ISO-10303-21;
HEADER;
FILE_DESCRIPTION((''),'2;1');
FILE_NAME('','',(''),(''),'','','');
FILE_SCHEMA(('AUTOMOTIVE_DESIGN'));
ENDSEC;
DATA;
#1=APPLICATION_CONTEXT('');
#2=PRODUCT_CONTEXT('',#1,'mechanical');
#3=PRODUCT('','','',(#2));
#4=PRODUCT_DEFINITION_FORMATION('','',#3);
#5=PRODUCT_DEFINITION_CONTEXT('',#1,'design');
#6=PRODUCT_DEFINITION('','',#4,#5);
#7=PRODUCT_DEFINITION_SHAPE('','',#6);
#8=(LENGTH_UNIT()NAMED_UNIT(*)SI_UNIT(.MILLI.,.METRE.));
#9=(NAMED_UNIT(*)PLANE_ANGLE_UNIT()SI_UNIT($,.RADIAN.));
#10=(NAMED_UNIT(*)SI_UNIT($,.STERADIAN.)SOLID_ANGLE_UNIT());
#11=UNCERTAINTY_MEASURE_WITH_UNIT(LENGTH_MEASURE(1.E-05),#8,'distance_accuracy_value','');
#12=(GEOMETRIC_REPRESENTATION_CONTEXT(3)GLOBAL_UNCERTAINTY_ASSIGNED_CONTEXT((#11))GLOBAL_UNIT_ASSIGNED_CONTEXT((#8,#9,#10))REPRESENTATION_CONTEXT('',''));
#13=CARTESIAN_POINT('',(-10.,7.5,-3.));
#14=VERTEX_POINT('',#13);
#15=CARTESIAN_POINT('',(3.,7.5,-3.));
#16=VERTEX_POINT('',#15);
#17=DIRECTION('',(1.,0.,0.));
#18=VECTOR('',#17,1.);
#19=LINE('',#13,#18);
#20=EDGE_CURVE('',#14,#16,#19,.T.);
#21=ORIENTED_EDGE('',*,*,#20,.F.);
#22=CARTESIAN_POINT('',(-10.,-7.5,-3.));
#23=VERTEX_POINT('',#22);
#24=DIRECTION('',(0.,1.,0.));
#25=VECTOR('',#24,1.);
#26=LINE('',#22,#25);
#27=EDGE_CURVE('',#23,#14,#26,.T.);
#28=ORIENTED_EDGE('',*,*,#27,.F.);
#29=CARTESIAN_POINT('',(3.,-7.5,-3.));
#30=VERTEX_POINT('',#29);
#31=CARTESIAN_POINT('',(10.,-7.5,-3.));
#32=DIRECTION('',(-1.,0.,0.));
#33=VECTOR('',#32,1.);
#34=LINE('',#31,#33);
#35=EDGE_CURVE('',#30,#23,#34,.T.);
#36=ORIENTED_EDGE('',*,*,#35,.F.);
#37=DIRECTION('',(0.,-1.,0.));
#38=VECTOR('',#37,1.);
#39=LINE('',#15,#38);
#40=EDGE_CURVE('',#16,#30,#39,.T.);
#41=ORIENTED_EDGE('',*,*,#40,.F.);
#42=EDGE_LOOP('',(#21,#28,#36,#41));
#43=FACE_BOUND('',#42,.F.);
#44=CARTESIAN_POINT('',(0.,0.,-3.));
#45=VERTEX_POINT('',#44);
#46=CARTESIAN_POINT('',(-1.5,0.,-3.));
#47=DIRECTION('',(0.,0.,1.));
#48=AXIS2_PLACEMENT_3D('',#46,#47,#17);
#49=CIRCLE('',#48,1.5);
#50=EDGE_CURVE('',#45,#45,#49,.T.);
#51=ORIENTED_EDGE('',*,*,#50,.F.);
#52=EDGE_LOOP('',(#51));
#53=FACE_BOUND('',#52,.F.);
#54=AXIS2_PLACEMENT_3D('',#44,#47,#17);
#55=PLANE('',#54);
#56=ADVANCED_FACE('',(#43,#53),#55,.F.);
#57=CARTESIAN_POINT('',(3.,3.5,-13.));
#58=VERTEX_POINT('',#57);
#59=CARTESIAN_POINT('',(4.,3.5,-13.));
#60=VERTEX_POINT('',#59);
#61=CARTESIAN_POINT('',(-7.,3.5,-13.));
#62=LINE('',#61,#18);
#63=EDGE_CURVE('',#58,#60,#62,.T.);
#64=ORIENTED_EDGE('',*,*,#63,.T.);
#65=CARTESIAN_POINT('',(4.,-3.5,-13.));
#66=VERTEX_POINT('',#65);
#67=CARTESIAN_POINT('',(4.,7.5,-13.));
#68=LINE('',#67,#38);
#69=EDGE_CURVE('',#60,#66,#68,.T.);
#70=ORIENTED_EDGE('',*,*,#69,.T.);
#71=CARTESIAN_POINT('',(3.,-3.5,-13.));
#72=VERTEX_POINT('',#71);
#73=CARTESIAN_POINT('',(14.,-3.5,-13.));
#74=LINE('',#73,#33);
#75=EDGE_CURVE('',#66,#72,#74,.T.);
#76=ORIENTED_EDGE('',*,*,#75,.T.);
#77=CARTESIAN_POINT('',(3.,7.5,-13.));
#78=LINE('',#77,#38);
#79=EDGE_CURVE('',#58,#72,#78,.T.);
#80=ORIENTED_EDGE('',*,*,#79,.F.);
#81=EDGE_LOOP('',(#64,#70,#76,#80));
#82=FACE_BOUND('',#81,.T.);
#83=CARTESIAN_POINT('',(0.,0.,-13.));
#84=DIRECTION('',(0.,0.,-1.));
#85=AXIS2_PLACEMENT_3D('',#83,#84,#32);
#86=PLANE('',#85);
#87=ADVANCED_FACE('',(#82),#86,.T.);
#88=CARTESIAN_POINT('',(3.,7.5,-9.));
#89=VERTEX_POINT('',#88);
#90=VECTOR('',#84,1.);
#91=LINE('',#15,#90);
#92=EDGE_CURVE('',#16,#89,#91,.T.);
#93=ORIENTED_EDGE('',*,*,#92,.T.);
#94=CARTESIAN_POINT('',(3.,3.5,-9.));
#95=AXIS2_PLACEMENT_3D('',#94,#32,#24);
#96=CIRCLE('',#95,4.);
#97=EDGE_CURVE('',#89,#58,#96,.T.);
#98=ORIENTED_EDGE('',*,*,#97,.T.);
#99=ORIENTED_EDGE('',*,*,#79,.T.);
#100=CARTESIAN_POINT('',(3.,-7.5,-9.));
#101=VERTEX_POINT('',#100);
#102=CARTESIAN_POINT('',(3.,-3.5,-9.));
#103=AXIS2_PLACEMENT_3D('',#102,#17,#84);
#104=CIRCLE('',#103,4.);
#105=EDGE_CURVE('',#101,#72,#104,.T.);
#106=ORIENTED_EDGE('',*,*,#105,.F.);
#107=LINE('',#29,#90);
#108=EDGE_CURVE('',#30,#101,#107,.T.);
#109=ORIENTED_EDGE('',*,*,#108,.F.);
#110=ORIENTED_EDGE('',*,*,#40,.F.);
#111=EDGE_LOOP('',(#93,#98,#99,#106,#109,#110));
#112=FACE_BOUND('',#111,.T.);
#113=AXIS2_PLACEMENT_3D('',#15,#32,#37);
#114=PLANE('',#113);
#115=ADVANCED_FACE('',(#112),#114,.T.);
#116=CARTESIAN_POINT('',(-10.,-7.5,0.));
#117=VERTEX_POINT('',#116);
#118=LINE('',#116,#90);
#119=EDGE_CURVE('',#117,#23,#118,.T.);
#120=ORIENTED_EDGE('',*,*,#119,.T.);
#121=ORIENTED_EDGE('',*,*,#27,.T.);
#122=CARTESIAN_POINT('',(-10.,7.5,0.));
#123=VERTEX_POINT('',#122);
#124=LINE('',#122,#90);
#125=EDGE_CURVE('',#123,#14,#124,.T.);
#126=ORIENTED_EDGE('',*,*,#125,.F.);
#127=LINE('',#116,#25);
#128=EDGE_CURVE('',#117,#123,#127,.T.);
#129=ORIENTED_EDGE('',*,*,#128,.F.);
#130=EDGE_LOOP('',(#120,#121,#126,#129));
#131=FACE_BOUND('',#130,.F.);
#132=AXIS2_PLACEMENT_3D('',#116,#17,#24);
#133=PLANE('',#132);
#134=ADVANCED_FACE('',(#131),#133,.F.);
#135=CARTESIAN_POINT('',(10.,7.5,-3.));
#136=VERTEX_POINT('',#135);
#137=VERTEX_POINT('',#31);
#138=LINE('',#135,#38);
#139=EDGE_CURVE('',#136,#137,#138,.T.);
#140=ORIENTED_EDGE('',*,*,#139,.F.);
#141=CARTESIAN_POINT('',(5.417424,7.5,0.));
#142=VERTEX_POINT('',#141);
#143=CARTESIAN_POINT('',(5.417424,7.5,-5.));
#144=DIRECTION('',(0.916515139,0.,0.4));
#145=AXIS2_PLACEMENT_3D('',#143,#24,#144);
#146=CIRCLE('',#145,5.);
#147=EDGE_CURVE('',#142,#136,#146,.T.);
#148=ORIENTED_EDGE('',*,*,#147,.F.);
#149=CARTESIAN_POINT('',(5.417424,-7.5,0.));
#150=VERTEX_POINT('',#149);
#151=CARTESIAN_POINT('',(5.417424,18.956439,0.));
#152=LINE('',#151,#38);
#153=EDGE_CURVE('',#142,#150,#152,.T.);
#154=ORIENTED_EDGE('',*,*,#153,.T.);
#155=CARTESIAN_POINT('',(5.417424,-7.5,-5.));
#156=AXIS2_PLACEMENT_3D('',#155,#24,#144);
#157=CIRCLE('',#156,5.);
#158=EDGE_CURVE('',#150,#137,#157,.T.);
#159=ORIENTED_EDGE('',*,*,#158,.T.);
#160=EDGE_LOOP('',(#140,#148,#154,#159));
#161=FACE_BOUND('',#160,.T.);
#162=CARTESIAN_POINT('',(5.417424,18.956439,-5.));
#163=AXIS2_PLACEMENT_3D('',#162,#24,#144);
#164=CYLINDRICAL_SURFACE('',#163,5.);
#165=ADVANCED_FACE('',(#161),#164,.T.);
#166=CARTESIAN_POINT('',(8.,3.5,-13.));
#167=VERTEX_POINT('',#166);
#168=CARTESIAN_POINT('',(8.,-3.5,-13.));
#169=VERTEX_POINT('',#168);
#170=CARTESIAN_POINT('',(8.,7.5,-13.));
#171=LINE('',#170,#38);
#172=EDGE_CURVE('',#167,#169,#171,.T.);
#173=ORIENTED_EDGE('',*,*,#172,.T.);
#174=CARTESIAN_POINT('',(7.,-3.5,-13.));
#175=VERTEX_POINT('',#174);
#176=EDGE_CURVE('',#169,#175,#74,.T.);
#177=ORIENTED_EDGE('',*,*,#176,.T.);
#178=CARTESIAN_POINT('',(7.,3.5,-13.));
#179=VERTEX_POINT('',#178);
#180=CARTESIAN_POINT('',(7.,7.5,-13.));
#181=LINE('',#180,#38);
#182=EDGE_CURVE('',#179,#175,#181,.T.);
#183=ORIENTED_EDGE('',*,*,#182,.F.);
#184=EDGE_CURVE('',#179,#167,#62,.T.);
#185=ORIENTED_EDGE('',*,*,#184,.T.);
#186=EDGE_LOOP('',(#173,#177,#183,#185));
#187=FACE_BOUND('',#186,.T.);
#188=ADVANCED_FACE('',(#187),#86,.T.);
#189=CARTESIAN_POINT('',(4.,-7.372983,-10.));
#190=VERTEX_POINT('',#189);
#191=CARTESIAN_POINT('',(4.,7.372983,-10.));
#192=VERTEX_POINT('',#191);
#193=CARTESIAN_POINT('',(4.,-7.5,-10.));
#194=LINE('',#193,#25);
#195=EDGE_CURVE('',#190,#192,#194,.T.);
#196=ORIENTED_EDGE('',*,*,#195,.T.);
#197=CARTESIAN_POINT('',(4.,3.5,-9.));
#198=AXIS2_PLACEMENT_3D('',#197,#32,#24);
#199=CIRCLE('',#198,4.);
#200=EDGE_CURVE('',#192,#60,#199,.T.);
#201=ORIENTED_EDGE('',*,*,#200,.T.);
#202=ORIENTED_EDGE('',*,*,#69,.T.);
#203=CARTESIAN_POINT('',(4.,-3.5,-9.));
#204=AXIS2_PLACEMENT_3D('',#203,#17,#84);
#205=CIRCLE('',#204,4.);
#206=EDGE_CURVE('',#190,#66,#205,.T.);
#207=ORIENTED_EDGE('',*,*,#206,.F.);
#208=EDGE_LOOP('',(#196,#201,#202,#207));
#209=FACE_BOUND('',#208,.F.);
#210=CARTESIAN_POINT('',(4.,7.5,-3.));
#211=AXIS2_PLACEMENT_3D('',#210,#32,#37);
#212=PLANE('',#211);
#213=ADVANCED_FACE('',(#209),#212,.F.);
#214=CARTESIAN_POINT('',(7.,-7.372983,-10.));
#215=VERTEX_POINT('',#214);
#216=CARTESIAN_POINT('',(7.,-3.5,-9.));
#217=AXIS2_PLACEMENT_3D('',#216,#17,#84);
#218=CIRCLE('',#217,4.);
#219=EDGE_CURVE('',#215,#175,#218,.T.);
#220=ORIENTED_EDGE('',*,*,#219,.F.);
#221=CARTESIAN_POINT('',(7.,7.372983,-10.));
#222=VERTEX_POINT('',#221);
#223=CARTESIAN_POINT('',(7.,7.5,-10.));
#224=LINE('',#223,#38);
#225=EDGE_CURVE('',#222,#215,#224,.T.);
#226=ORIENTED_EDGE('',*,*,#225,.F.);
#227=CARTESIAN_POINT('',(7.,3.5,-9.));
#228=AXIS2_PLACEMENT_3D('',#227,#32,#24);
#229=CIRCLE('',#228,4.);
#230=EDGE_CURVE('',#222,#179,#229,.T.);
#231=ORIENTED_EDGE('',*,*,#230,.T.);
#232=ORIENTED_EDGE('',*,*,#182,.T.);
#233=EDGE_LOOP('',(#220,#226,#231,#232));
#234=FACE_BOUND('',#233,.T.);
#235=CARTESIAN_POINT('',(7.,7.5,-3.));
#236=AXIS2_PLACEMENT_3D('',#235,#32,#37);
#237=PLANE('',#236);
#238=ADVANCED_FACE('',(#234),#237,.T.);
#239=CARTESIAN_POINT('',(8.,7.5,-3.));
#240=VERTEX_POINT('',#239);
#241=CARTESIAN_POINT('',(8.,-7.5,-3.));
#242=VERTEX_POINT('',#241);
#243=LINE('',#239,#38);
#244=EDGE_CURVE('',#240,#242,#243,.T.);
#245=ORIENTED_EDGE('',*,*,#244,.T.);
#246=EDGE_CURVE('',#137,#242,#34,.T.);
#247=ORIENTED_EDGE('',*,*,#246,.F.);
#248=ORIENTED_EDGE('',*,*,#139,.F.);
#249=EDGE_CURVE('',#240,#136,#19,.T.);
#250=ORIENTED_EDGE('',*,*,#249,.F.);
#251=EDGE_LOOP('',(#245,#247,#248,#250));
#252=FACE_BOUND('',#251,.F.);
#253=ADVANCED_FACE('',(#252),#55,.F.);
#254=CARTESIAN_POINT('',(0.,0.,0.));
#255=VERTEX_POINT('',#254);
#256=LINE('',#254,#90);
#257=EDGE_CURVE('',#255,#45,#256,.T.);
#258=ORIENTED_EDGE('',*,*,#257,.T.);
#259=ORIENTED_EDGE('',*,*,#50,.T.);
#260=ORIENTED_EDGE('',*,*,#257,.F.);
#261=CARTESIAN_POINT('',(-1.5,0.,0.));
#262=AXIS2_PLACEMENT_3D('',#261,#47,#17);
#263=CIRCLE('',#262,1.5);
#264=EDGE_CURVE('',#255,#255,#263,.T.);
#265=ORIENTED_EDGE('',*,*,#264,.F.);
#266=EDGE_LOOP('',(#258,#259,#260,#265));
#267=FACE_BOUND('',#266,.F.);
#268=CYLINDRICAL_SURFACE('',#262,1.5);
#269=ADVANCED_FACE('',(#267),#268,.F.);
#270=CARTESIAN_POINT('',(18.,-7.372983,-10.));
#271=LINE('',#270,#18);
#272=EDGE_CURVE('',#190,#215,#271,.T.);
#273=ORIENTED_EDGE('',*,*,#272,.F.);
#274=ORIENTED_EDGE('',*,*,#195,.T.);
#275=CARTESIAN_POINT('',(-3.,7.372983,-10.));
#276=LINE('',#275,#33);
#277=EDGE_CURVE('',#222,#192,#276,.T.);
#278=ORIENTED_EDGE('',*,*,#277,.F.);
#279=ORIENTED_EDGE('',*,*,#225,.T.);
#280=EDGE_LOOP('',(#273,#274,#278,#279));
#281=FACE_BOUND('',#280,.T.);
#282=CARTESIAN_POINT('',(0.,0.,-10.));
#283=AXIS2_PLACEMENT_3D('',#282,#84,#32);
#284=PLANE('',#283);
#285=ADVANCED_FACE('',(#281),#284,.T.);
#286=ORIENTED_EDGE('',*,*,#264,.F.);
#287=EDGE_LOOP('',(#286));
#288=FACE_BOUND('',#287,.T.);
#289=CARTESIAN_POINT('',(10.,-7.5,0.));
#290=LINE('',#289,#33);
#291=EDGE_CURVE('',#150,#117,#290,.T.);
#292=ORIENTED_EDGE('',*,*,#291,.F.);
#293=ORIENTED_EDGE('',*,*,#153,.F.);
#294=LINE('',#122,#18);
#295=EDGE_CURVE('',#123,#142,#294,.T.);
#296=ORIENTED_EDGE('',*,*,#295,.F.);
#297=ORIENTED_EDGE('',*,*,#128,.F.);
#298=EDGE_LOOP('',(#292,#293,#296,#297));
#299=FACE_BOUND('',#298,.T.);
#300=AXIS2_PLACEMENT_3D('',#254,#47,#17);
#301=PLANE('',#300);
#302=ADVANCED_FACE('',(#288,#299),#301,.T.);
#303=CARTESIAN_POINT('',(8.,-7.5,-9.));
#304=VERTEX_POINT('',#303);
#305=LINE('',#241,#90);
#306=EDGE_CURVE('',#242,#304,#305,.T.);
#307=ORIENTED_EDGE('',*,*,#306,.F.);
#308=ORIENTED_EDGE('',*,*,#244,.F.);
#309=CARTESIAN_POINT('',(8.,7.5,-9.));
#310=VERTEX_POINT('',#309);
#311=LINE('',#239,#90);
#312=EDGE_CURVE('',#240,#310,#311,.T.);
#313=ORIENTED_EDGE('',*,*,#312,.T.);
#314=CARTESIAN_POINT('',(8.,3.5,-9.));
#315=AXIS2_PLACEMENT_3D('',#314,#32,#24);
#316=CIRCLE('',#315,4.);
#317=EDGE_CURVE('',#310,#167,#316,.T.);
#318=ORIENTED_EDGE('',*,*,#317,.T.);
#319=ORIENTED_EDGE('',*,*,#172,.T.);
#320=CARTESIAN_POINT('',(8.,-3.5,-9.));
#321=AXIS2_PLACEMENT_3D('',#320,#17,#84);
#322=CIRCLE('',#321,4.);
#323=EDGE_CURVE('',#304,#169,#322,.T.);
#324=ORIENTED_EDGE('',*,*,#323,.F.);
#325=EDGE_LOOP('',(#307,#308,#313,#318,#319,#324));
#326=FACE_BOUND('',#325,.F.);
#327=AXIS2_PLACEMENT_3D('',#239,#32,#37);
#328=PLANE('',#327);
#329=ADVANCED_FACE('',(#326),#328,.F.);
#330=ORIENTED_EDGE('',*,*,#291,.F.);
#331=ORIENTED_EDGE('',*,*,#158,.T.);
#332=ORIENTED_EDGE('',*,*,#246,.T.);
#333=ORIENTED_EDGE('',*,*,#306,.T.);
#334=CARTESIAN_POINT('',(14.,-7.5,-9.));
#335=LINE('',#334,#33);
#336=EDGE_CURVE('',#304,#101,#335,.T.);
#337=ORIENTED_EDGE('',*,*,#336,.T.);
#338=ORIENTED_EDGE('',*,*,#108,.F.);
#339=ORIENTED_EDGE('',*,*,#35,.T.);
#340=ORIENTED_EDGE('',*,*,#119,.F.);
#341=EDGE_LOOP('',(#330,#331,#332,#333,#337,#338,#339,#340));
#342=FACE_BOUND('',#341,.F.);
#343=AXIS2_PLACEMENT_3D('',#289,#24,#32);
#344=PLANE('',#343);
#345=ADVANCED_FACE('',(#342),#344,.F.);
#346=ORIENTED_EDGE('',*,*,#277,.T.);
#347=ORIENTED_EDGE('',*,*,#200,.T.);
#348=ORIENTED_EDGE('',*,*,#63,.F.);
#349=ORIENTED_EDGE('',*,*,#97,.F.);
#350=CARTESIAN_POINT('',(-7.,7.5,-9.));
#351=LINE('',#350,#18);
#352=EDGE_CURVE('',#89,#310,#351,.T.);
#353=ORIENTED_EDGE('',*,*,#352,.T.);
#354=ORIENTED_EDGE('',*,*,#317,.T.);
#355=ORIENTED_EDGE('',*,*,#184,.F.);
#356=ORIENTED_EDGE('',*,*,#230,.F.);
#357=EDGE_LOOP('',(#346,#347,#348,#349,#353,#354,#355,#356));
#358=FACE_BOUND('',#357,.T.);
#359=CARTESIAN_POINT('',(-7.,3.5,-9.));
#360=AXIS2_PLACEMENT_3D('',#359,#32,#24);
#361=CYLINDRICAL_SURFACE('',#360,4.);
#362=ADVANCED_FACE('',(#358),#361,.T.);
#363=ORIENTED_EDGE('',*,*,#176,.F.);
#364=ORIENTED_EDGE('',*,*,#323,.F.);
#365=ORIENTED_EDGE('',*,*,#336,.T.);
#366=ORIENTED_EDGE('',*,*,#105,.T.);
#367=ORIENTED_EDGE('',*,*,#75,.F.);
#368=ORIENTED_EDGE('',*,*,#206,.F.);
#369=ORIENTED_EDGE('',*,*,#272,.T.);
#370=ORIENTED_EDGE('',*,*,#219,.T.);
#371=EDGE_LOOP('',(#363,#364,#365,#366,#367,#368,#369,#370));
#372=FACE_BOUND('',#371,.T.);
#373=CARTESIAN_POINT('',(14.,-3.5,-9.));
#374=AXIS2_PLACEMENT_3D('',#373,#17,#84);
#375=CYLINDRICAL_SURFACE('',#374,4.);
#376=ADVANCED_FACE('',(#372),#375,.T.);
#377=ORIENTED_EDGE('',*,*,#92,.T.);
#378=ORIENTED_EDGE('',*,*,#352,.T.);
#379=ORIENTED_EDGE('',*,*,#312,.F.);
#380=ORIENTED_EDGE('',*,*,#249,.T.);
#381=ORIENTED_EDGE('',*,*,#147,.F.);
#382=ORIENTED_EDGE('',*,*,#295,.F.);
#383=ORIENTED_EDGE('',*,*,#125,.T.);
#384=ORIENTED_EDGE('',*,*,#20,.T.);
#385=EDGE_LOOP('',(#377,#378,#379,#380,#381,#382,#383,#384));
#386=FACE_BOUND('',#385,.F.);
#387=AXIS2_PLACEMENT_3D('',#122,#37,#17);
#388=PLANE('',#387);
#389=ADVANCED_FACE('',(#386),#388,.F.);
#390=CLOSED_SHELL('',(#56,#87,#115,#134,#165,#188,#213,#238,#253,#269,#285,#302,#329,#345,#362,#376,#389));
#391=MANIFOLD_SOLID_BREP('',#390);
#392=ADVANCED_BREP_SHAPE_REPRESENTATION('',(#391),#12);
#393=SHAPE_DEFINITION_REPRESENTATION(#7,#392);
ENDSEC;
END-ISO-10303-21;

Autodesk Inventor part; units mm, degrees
ref_plane "YZ Plane" through (0, 0, 0) normal (1, 0, 0) x (0, 1, 0)
ref_plane "XZ Plane" through (0, 0, 0) normal (0, 1, 0) x (-1, 0, 0)
ref_plane "XY Plane" through (0, 0, 0) normal (0, 0, 1) x (1, 0, 0)
sketch "Esboço1" plane through (0, 0, 0) normal (0, 0, 1) x (1, 0, 0)
  line L0 (-10, 7.5) -> (10, 7.5)
  line L1 (10, 7.5) -> (10, -7.5)
  line L2 (10, -7.5) -> (-10, -7.5)
  line L3 (-10, -7.5) -> (-10, 7.5)
  line L4 (-10, 7.5) -> (10, -7.5) construction
  line L5 (10, 7.5) -> (-10, -7.5) construction
  circle A0 centre (-1.5, 0) radius 1.5
  point P0 (0, 0)
  dimension "d0" = 20
  dimension "d1" = 15
  dimension "d13" = 3
  dimension "d14" = 1.5
  dimension "d15" = 7.5
extrude "Extrusão1" add sketch "Esboço1" against normal blind 3
sketch "Esboço2" plane through (0, 0, -3) normal (0, 0, -1) x (-1, 0, 0)
  line L0 (10, 7.5) -> (-10, 7.5) projected
  line L1 (-4, 7.5) -> (-4, -7.5247)
  line L2 (-7, 7.5) -> (-7, -7.5)
  line L3 (-10, -7.5) -> (10, -7.5) projected
  line L4 (-3, 7.5) -> (-3, -7.5247)
  line L5 (-8, 7.5) -> (-8, -7.5)
  point P0 (0, 0)
  point P1 (0, 0)
  point P2 (-3, -7.5)
  point P3 (-4, -7.5)
  dimension "d6" = 3
  dimension "d7" = 1
  dimension "d8" = 1
  dimension "d16" = 7
extrude "Extrusão2" add sketch "Esboço2" along normal blind 10 contours L4 L3 L1 L0 | L2 L3 L5 L0
sketch "Esboço3" plane through (-10, 7.5, 0) normal (0, 1, 0) x (1, 0, 0)
  point P0 (10, 0)
fillet "Arredondamento1" radius 5 1 edges at (10, 0, 0)
sketch "Esboço4" plane through (0, 0, -3) normal (0, 0, -1) x (-1, 0, 0)
  line L0 (-7, 7.5) -> (-7, -7.5) projected
  line L1 (-7, -7.5) -> (-4, -7.5) projected
  line L2 (-4, -7.5) -> (-4, 7.5) projected
  line L3 (-4, 7.5) -> (-7, 7.5) projected
  point P0 (0, 0)
extrude "Extrusão3" add sketch "Esboço4" along normal blind 7
fillet "Arredondamento3" radius 4 4 edges at (3.5, 7.5, -13) (7.5, 7.5, -13) (3.5, -7.5, -13) (7.5, -7.5, -13)
